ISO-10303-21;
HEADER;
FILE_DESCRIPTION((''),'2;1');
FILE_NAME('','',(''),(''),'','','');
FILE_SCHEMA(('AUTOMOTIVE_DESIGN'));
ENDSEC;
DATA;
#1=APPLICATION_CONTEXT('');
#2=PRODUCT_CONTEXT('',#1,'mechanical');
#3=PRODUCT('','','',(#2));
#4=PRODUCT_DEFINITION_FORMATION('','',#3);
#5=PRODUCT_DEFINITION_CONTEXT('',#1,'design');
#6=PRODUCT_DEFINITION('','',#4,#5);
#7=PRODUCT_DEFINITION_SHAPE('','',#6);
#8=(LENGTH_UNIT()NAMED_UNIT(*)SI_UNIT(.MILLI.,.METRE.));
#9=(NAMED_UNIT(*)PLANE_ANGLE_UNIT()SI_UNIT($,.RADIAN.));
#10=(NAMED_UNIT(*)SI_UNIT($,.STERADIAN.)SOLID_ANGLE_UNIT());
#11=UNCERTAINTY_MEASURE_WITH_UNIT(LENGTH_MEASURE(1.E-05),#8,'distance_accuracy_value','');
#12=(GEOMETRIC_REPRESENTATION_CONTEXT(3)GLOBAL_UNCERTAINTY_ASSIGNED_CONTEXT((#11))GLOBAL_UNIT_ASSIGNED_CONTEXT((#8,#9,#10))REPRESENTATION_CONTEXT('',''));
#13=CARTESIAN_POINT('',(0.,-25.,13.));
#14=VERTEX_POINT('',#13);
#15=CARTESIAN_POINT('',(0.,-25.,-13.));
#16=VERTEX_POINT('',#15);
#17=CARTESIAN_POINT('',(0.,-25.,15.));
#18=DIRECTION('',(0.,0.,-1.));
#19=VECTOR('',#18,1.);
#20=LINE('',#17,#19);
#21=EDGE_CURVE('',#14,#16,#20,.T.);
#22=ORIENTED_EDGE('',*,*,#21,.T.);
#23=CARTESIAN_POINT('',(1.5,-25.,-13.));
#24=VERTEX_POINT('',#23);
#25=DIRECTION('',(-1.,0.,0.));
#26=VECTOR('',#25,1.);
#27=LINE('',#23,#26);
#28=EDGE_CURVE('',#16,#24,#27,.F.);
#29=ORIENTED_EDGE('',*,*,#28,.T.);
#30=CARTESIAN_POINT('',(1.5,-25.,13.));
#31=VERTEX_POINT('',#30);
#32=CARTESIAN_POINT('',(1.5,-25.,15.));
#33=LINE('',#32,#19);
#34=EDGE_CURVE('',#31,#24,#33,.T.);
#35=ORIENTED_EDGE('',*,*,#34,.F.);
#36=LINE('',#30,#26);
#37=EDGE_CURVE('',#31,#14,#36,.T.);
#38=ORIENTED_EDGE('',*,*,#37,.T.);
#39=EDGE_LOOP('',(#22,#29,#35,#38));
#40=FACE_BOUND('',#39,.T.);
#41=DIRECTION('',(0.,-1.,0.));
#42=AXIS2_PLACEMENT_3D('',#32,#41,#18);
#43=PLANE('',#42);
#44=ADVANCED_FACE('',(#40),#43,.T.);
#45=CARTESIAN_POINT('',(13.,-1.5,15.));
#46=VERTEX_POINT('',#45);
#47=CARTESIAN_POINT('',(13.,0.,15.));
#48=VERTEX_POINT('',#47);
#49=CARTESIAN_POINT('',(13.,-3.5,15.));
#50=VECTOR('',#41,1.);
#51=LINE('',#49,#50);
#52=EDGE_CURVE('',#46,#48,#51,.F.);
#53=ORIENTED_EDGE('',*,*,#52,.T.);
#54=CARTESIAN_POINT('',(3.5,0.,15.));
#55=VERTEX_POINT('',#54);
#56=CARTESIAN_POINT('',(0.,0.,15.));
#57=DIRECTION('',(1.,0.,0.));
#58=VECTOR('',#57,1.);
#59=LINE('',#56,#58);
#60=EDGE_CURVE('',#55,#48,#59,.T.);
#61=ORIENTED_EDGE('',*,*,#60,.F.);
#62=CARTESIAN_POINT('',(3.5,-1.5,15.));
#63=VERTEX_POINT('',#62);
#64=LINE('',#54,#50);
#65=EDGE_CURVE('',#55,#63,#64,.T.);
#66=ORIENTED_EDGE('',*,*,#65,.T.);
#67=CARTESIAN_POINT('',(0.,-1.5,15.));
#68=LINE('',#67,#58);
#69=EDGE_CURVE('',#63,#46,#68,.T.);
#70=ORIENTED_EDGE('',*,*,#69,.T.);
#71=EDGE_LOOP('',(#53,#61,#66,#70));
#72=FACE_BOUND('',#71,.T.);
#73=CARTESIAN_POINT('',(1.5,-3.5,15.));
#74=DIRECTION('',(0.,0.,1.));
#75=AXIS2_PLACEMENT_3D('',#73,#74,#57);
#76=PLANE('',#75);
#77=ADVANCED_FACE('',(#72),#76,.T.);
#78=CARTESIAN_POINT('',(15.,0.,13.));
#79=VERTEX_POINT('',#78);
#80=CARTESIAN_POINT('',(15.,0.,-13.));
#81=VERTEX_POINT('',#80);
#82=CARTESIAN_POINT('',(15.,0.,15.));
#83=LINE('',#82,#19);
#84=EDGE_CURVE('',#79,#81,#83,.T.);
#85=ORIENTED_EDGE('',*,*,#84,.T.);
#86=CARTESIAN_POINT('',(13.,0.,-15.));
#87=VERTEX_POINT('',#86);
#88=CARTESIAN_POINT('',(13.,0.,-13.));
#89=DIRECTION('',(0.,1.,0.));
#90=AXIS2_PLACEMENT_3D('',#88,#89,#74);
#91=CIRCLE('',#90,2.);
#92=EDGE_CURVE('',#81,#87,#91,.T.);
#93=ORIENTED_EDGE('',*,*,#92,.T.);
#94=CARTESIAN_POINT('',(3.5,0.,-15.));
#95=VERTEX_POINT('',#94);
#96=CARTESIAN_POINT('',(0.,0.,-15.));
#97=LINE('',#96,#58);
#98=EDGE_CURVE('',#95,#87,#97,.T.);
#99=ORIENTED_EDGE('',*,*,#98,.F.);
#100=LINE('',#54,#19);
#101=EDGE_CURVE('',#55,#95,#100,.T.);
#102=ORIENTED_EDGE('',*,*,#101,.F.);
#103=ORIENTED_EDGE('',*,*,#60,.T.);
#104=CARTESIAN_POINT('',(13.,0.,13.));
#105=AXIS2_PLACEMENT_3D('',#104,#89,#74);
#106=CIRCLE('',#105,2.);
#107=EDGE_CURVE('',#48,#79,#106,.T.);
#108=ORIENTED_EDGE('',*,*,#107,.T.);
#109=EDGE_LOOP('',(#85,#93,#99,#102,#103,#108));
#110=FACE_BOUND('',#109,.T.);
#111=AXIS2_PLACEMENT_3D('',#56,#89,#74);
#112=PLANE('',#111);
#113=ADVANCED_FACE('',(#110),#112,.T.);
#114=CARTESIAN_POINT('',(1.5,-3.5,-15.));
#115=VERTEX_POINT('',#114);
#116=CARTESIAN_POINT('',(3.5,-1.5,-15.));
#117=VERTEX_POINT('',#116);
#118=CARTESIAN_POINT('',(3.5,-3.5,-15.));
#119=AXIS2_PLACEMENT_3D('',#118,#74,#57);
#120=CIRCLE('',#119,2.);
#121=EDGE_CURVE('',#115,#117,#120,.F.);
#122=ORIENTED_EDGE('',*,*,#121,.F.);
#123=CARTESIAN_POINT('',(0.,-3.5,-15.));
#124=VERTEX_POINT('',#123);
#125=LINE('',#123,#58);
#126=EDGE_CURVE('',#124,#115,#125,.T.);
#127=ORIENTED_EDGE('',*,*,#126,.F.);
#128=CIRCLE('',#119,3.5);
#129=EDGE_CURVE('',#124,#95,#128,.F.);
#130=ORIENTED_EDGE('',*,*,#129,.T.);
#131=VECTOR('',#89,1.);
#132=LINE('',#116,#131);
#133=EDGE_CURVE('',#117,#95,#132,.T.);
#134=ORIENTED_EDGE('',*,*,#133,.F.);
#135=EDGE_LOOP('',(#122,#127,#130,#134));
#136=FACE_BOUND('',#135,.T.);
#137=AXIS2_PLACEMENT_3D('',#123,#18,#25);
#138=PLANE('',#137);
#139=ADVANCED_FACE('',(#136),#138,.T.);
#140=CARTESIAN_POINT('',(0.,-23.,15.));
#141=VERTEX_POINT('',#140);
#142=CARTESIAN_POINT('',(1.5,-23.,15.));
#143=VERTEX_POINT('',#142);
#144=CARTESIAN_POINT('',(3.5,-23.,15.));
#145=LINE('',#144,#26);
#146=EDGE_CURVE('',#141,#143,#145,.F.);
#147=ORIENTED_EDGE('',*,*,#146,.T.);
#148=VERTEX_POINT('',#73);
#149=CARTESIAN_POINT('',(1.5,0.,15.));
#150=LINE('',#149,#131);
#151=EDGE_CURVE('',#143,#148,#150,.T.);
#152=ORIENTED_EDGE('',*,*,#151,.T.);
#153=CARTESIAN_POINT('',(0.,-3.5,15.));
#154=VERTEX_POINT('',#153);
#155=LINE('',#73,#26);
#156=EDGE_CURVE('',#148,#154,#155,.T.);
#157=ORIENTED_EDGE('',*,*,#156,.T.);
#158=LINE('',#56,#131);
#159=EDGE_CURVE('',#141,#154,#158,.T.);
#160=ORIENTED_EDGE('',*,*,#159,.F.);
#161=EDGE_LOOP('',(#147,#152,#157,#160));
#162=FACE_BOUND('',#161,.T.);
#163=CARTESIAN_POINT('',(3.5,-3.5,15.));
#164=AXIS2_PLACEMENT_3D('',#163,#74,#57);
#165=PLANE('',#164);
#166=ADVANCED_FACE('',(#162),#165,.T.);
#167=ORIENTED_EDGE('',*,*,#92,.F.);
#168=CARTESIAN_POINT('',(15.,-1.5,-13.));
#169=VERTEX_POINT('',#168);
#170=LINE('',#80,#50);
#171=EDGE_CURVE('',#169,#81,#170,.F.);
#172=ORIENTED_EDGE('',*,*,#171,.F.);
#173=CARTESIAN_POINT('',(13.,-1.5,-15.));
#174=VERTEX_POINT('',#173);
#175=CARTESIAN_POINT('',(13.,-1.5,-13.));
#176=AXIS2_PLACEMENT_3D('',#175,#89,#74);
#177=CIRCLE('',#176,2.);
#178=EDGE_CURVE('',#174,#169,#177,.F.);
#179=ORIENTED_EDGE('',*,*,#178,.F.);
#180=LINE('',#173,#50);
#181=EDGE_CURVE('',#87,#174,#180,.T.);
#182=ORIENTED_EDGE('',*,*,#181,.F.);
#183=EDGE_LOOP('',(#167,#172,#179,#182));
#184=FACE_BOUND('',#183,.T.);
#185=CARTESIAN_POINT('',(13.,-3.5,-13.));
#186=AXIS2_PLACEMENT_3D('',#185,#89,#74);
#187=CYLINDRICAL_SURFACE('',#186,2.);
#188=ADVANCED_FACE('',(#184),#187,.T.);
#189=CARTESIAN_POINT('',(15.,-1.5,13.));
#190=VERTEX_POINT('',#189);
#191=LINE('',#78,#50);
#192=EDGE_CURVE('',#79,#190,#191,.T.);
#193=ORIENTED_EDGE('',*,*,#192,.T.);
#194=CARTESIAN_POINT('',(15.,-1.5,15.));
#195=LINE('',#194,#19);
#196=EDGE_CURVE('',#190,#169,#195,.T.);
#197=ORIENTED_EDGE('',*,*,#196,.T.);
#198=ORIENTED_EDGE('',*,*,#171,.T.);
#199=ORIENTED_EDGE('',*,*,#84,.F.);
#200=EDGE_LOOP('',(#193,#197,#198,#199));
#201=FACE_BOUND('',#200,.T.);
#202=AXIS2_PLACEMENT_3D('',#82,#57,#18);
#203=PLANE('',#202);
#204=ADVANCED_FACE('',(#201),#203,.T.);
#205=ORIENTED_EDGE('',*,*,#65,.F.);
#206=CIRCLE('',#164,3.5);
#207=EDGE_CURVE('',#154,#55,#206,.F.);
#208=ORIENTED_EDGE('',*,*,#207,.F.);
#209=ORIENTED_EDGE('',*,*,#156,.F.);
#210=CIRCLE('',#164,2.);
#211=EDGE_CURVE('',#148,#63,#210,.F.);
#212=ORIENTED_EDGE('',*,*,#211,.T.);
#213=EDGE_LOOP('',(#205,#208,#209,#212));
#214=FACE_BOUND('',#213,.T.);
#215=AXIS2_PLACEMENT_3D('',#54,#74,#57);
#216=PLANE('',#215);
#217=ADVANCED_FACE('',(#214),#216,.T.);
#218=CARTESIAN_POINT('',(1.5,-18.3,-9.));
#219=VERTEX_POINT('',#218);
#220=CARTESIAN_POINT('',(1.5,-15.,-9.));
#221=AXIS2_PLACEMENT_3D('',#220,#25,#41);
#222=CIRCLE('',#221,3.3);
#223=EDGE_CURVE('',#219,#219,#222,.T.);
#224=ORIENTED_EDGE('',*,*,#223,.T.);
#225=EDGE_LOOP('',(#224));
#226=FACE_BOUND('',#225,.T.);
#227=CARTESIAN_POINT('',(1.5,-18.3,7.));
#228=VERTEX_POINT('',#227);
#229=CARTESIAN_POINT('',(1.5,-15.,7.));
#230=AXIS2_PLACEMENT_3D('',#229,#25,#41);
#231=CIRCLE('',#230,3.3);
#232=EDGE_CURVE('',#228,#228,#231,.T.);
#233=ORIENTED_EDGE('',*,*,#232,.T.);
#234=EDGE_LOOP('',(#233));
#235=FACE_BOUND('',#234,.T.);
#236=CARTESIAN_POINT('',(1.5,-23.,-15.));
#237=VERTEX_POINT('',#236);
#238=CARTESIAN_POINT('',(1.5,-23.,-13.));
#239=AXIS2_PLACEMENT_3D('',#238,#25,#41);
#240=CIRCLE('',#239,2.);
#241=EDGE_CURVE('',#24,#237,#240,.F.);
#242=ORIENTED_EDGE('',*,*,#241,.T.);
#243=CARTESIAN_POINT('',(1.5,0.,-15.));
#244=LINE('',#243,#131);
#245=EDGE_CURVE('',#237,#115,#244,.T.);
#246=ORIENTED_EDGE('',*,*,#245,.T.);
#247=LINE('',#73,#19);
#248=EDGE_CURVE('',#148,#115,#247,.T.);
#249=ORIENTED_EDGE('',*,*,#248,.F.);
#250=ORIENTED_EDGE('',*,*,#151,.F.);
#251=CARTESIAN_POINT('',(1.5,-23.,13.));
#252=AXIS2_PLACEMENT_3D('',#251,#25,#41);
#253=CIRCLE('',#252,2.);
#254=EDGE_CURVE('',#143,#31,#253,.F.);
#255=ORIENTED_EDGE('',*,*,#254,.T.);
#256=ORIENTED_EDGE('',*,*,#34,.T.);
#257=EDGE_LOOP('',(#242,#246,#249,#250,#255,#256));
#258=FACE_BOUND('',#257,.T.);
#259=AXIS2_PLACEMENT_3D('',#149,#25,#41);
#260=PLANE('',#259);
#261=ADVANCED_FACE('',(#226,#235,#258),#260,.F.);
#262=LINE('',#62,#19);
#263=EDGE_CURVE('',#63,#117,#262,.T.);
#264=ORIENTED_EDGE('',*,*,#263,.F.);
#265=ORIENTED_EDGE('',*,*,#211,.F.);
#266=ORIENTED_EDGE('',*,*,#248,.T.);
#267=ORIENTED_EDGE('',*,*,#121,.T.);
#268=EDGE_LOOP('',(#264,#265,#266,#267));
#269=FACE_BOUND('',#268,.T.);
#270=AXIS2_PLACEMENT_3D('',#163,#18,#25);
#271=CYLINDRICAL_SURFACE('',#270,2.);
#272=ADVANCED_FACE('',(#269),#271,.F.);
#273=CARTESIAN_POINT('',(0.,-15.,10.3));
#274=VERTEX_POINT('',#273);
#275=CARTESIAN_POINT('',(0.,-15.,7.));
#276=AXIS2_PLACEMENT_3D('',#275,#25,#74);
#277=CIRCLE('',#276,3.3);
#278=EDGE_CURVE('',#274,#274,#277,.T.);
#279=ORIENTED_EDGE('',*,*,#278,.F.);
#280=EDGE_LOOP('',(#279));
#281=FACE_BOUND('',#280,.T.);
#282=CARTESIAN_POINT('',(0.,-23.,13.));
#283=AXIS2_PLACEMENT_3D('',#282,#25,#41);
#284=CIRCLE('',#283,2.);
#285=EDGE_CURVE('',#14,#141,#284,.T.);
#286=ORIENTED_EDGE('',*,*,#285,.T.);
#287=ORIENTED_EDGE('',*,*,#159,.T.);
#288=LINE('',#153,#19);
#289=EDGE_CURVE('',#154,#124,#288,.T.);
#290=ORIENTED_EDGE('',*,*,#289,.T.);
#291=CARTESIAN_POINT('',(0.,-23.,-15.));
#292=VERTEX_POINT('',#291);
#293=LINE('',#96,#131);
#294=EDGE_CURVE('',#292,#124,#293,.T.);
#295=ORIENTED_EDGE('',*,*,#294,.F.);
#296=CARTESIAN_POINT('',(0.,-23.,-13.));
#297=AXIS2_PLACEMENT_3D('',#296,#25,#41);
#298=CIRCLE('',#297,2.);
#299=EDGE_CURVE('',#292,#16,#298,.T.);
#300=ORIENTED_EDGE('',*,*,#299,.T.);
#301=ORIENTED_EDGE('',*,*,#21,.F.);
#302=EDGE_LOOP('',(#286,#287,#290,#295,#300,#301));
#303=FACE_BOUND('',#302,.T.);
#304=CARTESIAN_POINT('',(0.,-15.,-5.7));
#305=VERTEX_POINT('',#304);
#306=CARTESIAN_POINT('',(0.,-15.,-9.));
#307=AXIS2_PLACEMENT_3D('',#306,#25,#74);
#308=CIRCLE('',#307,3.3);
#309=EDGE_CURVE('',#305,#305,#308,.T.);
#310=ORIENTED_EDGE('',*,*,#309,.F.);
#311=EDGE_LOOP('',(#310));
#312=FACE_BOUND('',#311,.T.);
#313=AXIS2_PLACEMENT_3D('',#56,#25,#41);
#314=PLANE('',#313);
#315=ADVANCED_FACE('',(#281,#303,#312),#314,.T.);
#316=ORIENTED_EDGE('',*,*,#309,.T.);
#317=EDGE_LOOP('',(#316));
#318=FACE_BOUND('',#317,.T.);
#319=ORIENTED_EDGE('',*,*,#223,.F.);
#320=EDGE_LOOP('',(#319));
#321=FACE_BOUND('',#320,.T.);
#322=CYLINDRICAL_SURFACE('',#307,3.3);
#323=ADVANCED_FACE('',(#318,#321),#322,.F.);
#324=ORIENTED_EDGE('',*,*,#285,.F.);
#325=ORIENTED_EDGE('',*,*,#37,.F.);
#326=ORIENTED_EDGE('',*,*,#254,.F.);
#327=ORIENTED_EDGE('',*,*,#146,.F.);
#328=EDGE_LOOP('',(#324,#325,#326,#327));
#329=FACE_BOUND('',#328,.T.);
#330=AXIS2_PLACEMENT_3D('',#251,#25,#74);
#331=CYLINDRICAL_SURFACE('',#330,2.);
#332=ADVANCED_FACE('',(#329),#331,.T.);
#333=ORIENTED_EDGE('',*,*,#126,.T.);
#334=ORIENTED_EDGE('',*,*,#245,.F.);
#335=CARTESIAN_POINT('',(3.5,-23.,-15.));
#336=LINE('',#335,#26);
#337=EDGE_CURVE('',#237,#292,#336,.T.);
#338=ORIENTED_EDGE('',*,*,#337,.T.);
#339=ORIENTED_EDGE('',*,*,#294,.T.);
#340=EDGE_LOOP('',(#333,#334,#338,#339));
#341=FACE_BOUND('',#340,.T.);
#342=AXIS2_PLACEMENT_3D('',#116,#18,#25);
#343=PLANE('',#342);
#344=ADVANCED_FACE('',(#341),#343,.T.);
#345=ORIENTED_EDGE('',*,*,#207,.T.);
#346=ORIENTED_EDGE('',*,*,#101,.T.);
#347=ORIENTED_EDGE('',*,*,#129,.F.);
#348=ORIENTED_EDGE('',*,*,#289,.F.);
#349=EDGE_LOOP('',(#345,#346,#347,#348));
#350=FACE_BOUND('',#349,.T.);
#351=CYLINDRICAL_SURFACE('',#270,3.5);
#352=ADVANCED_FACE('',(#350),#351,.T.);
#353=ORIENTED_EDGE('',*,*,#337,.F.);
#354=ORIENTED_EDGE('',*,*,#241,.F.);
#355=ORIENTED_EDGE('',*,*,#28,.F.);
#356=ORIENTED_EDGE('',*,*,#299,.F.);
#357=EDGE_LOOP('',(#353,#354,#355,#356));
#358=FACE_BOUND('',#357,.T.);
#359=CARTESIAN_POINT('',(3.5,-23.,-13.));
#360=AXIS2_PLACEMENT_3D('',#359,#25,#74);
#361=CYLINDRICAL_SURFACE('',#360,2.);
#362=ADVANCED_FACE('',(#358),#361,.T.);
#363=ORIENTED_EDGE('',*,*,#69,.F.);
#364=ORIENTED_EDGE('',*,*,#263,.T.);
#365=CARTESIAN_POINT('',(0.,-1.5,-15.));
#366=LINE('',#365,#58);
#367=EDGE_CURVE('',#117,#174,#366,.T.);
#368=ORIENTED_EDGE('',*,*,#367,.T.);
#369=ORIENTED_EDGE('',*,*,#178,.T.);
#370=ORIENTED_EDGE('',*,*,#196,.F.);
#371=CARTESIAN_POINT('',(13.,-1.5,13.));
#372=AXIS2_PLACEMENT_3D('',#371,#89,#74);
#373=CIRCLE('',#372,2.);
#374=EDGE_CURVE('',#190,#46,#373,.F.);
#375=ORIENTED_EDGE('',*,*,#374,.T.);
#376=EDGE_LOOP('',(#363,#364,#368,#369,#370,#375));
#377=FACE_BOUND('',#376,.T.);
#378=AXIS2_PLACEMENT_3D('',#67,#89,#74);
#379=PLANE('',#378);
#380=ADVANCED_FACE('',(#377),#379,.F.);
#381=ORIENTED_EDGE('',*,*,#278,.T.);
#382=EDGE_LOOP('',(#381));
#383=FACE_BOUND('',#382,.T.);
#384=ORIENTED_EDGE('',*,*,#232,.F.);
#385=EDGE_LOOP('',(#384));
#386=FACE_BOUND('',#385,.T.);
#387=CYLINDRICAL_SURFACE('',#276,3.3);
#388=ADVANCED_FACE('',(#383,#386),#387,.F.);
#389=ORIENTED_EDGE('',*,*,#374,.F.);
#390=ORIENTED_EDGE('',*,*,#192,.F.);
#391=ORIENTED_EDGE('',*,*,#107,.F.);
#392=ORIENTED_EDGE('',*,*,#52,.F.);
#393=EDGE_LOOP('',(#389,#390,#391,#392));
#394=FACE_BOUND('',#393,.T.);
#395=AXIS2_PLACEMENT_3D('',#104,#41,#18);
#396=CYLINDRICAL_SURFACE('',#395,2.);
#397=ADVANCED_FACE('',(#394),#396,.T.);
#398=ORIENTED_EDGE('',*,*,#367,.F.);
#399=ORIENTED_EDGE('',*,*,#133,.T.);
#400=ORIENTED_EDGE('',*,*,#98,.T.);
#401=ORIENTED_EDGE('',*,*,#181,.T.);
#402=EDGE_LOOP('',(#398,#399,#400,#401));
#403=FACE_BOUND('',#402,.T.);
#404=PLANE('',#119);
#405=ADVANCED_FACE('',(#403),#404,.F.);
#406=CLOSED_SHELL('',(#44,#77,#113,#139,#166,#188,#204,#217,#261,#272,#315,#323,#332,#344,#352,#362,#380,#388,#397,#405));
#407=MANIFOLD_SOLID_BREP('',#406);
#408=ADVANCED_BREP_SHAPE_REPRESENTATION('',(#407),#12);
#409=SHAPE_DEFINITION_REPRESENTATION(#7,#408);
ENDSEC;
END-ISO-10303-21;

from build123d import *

# Parameters (mm, degrees)
ODGI_CIE_BAZOWE1_DEPTH  = 15
OTW_R_POD_RUB_M61_D     = 6.6
OTW_R_POD_RUB_M61_DEPTH = 10
OTW_R_POD_RUB_M61_TIP   = 1.982840043
ZAOKR_GLENIE1_R         = 2


# Sheet-metal steps are written as plain solids
with BuildPart() as part:
    # Szkic1 → Odgięcie bazowe1 (new, symmetric)
    with BuildSketch(Plane.XY):
        with BuildLine():
            Line((15, 0), (3.5, 0))
            ThreePointArc((3.5, 0), (1.025126266, -1.025126266), (0, -3.5))
            Line((0, -3.5), (0, -25))
            Line((0, -25), (1.5, -25))
            Line((1.5, -25), (1.5, -3.5))
            ThreePointArc((1.5, -3.5), (2.085786438, -2.085786438), (3.5, -1.5))
            Line((3.5, -1.5), (15, -1.5))
            Line((15, -1.5), (15, 0))
        make_face()
    extrude(amount=ODGI_CIE_BAZOWE1_DEPTH, both=True)

    # Otwór pod śrubę M61
    with Locations(Plane.ZY):
        with Locations((-9, -15), (7, -15)):
            Hole(OTW_R_POD_RUB_M61_D / 2, depth=OTW_R_POD_RUB_M61_DEPTH)
            with Locations((0, 0, -(OTW_R_POD_RUB_M61_DEPTH + OTW_R_POD_RUB_M61_TIP / 2))):  # 118° drill point
                Cone(0, OTW_R_POD_RUB_M61_D / 2, OTW_R_POD_RUB_M61_TIP, mode=Mode.SUBTRACT)

    # Zaokrąglenie1
    zaokr_glenie1_edges = [part.edges().sort_by_distance(p)[0] for p in [
        (0.75, -25, 15),
        (0.75, -25, -15),
        (15, -0.75, 15),
        (15, -0.75, -15),
    ]]
    fillet(zaokr_glenie1_edges, radius=ZAOKR_GLENIE1_R)


solid = part.part
